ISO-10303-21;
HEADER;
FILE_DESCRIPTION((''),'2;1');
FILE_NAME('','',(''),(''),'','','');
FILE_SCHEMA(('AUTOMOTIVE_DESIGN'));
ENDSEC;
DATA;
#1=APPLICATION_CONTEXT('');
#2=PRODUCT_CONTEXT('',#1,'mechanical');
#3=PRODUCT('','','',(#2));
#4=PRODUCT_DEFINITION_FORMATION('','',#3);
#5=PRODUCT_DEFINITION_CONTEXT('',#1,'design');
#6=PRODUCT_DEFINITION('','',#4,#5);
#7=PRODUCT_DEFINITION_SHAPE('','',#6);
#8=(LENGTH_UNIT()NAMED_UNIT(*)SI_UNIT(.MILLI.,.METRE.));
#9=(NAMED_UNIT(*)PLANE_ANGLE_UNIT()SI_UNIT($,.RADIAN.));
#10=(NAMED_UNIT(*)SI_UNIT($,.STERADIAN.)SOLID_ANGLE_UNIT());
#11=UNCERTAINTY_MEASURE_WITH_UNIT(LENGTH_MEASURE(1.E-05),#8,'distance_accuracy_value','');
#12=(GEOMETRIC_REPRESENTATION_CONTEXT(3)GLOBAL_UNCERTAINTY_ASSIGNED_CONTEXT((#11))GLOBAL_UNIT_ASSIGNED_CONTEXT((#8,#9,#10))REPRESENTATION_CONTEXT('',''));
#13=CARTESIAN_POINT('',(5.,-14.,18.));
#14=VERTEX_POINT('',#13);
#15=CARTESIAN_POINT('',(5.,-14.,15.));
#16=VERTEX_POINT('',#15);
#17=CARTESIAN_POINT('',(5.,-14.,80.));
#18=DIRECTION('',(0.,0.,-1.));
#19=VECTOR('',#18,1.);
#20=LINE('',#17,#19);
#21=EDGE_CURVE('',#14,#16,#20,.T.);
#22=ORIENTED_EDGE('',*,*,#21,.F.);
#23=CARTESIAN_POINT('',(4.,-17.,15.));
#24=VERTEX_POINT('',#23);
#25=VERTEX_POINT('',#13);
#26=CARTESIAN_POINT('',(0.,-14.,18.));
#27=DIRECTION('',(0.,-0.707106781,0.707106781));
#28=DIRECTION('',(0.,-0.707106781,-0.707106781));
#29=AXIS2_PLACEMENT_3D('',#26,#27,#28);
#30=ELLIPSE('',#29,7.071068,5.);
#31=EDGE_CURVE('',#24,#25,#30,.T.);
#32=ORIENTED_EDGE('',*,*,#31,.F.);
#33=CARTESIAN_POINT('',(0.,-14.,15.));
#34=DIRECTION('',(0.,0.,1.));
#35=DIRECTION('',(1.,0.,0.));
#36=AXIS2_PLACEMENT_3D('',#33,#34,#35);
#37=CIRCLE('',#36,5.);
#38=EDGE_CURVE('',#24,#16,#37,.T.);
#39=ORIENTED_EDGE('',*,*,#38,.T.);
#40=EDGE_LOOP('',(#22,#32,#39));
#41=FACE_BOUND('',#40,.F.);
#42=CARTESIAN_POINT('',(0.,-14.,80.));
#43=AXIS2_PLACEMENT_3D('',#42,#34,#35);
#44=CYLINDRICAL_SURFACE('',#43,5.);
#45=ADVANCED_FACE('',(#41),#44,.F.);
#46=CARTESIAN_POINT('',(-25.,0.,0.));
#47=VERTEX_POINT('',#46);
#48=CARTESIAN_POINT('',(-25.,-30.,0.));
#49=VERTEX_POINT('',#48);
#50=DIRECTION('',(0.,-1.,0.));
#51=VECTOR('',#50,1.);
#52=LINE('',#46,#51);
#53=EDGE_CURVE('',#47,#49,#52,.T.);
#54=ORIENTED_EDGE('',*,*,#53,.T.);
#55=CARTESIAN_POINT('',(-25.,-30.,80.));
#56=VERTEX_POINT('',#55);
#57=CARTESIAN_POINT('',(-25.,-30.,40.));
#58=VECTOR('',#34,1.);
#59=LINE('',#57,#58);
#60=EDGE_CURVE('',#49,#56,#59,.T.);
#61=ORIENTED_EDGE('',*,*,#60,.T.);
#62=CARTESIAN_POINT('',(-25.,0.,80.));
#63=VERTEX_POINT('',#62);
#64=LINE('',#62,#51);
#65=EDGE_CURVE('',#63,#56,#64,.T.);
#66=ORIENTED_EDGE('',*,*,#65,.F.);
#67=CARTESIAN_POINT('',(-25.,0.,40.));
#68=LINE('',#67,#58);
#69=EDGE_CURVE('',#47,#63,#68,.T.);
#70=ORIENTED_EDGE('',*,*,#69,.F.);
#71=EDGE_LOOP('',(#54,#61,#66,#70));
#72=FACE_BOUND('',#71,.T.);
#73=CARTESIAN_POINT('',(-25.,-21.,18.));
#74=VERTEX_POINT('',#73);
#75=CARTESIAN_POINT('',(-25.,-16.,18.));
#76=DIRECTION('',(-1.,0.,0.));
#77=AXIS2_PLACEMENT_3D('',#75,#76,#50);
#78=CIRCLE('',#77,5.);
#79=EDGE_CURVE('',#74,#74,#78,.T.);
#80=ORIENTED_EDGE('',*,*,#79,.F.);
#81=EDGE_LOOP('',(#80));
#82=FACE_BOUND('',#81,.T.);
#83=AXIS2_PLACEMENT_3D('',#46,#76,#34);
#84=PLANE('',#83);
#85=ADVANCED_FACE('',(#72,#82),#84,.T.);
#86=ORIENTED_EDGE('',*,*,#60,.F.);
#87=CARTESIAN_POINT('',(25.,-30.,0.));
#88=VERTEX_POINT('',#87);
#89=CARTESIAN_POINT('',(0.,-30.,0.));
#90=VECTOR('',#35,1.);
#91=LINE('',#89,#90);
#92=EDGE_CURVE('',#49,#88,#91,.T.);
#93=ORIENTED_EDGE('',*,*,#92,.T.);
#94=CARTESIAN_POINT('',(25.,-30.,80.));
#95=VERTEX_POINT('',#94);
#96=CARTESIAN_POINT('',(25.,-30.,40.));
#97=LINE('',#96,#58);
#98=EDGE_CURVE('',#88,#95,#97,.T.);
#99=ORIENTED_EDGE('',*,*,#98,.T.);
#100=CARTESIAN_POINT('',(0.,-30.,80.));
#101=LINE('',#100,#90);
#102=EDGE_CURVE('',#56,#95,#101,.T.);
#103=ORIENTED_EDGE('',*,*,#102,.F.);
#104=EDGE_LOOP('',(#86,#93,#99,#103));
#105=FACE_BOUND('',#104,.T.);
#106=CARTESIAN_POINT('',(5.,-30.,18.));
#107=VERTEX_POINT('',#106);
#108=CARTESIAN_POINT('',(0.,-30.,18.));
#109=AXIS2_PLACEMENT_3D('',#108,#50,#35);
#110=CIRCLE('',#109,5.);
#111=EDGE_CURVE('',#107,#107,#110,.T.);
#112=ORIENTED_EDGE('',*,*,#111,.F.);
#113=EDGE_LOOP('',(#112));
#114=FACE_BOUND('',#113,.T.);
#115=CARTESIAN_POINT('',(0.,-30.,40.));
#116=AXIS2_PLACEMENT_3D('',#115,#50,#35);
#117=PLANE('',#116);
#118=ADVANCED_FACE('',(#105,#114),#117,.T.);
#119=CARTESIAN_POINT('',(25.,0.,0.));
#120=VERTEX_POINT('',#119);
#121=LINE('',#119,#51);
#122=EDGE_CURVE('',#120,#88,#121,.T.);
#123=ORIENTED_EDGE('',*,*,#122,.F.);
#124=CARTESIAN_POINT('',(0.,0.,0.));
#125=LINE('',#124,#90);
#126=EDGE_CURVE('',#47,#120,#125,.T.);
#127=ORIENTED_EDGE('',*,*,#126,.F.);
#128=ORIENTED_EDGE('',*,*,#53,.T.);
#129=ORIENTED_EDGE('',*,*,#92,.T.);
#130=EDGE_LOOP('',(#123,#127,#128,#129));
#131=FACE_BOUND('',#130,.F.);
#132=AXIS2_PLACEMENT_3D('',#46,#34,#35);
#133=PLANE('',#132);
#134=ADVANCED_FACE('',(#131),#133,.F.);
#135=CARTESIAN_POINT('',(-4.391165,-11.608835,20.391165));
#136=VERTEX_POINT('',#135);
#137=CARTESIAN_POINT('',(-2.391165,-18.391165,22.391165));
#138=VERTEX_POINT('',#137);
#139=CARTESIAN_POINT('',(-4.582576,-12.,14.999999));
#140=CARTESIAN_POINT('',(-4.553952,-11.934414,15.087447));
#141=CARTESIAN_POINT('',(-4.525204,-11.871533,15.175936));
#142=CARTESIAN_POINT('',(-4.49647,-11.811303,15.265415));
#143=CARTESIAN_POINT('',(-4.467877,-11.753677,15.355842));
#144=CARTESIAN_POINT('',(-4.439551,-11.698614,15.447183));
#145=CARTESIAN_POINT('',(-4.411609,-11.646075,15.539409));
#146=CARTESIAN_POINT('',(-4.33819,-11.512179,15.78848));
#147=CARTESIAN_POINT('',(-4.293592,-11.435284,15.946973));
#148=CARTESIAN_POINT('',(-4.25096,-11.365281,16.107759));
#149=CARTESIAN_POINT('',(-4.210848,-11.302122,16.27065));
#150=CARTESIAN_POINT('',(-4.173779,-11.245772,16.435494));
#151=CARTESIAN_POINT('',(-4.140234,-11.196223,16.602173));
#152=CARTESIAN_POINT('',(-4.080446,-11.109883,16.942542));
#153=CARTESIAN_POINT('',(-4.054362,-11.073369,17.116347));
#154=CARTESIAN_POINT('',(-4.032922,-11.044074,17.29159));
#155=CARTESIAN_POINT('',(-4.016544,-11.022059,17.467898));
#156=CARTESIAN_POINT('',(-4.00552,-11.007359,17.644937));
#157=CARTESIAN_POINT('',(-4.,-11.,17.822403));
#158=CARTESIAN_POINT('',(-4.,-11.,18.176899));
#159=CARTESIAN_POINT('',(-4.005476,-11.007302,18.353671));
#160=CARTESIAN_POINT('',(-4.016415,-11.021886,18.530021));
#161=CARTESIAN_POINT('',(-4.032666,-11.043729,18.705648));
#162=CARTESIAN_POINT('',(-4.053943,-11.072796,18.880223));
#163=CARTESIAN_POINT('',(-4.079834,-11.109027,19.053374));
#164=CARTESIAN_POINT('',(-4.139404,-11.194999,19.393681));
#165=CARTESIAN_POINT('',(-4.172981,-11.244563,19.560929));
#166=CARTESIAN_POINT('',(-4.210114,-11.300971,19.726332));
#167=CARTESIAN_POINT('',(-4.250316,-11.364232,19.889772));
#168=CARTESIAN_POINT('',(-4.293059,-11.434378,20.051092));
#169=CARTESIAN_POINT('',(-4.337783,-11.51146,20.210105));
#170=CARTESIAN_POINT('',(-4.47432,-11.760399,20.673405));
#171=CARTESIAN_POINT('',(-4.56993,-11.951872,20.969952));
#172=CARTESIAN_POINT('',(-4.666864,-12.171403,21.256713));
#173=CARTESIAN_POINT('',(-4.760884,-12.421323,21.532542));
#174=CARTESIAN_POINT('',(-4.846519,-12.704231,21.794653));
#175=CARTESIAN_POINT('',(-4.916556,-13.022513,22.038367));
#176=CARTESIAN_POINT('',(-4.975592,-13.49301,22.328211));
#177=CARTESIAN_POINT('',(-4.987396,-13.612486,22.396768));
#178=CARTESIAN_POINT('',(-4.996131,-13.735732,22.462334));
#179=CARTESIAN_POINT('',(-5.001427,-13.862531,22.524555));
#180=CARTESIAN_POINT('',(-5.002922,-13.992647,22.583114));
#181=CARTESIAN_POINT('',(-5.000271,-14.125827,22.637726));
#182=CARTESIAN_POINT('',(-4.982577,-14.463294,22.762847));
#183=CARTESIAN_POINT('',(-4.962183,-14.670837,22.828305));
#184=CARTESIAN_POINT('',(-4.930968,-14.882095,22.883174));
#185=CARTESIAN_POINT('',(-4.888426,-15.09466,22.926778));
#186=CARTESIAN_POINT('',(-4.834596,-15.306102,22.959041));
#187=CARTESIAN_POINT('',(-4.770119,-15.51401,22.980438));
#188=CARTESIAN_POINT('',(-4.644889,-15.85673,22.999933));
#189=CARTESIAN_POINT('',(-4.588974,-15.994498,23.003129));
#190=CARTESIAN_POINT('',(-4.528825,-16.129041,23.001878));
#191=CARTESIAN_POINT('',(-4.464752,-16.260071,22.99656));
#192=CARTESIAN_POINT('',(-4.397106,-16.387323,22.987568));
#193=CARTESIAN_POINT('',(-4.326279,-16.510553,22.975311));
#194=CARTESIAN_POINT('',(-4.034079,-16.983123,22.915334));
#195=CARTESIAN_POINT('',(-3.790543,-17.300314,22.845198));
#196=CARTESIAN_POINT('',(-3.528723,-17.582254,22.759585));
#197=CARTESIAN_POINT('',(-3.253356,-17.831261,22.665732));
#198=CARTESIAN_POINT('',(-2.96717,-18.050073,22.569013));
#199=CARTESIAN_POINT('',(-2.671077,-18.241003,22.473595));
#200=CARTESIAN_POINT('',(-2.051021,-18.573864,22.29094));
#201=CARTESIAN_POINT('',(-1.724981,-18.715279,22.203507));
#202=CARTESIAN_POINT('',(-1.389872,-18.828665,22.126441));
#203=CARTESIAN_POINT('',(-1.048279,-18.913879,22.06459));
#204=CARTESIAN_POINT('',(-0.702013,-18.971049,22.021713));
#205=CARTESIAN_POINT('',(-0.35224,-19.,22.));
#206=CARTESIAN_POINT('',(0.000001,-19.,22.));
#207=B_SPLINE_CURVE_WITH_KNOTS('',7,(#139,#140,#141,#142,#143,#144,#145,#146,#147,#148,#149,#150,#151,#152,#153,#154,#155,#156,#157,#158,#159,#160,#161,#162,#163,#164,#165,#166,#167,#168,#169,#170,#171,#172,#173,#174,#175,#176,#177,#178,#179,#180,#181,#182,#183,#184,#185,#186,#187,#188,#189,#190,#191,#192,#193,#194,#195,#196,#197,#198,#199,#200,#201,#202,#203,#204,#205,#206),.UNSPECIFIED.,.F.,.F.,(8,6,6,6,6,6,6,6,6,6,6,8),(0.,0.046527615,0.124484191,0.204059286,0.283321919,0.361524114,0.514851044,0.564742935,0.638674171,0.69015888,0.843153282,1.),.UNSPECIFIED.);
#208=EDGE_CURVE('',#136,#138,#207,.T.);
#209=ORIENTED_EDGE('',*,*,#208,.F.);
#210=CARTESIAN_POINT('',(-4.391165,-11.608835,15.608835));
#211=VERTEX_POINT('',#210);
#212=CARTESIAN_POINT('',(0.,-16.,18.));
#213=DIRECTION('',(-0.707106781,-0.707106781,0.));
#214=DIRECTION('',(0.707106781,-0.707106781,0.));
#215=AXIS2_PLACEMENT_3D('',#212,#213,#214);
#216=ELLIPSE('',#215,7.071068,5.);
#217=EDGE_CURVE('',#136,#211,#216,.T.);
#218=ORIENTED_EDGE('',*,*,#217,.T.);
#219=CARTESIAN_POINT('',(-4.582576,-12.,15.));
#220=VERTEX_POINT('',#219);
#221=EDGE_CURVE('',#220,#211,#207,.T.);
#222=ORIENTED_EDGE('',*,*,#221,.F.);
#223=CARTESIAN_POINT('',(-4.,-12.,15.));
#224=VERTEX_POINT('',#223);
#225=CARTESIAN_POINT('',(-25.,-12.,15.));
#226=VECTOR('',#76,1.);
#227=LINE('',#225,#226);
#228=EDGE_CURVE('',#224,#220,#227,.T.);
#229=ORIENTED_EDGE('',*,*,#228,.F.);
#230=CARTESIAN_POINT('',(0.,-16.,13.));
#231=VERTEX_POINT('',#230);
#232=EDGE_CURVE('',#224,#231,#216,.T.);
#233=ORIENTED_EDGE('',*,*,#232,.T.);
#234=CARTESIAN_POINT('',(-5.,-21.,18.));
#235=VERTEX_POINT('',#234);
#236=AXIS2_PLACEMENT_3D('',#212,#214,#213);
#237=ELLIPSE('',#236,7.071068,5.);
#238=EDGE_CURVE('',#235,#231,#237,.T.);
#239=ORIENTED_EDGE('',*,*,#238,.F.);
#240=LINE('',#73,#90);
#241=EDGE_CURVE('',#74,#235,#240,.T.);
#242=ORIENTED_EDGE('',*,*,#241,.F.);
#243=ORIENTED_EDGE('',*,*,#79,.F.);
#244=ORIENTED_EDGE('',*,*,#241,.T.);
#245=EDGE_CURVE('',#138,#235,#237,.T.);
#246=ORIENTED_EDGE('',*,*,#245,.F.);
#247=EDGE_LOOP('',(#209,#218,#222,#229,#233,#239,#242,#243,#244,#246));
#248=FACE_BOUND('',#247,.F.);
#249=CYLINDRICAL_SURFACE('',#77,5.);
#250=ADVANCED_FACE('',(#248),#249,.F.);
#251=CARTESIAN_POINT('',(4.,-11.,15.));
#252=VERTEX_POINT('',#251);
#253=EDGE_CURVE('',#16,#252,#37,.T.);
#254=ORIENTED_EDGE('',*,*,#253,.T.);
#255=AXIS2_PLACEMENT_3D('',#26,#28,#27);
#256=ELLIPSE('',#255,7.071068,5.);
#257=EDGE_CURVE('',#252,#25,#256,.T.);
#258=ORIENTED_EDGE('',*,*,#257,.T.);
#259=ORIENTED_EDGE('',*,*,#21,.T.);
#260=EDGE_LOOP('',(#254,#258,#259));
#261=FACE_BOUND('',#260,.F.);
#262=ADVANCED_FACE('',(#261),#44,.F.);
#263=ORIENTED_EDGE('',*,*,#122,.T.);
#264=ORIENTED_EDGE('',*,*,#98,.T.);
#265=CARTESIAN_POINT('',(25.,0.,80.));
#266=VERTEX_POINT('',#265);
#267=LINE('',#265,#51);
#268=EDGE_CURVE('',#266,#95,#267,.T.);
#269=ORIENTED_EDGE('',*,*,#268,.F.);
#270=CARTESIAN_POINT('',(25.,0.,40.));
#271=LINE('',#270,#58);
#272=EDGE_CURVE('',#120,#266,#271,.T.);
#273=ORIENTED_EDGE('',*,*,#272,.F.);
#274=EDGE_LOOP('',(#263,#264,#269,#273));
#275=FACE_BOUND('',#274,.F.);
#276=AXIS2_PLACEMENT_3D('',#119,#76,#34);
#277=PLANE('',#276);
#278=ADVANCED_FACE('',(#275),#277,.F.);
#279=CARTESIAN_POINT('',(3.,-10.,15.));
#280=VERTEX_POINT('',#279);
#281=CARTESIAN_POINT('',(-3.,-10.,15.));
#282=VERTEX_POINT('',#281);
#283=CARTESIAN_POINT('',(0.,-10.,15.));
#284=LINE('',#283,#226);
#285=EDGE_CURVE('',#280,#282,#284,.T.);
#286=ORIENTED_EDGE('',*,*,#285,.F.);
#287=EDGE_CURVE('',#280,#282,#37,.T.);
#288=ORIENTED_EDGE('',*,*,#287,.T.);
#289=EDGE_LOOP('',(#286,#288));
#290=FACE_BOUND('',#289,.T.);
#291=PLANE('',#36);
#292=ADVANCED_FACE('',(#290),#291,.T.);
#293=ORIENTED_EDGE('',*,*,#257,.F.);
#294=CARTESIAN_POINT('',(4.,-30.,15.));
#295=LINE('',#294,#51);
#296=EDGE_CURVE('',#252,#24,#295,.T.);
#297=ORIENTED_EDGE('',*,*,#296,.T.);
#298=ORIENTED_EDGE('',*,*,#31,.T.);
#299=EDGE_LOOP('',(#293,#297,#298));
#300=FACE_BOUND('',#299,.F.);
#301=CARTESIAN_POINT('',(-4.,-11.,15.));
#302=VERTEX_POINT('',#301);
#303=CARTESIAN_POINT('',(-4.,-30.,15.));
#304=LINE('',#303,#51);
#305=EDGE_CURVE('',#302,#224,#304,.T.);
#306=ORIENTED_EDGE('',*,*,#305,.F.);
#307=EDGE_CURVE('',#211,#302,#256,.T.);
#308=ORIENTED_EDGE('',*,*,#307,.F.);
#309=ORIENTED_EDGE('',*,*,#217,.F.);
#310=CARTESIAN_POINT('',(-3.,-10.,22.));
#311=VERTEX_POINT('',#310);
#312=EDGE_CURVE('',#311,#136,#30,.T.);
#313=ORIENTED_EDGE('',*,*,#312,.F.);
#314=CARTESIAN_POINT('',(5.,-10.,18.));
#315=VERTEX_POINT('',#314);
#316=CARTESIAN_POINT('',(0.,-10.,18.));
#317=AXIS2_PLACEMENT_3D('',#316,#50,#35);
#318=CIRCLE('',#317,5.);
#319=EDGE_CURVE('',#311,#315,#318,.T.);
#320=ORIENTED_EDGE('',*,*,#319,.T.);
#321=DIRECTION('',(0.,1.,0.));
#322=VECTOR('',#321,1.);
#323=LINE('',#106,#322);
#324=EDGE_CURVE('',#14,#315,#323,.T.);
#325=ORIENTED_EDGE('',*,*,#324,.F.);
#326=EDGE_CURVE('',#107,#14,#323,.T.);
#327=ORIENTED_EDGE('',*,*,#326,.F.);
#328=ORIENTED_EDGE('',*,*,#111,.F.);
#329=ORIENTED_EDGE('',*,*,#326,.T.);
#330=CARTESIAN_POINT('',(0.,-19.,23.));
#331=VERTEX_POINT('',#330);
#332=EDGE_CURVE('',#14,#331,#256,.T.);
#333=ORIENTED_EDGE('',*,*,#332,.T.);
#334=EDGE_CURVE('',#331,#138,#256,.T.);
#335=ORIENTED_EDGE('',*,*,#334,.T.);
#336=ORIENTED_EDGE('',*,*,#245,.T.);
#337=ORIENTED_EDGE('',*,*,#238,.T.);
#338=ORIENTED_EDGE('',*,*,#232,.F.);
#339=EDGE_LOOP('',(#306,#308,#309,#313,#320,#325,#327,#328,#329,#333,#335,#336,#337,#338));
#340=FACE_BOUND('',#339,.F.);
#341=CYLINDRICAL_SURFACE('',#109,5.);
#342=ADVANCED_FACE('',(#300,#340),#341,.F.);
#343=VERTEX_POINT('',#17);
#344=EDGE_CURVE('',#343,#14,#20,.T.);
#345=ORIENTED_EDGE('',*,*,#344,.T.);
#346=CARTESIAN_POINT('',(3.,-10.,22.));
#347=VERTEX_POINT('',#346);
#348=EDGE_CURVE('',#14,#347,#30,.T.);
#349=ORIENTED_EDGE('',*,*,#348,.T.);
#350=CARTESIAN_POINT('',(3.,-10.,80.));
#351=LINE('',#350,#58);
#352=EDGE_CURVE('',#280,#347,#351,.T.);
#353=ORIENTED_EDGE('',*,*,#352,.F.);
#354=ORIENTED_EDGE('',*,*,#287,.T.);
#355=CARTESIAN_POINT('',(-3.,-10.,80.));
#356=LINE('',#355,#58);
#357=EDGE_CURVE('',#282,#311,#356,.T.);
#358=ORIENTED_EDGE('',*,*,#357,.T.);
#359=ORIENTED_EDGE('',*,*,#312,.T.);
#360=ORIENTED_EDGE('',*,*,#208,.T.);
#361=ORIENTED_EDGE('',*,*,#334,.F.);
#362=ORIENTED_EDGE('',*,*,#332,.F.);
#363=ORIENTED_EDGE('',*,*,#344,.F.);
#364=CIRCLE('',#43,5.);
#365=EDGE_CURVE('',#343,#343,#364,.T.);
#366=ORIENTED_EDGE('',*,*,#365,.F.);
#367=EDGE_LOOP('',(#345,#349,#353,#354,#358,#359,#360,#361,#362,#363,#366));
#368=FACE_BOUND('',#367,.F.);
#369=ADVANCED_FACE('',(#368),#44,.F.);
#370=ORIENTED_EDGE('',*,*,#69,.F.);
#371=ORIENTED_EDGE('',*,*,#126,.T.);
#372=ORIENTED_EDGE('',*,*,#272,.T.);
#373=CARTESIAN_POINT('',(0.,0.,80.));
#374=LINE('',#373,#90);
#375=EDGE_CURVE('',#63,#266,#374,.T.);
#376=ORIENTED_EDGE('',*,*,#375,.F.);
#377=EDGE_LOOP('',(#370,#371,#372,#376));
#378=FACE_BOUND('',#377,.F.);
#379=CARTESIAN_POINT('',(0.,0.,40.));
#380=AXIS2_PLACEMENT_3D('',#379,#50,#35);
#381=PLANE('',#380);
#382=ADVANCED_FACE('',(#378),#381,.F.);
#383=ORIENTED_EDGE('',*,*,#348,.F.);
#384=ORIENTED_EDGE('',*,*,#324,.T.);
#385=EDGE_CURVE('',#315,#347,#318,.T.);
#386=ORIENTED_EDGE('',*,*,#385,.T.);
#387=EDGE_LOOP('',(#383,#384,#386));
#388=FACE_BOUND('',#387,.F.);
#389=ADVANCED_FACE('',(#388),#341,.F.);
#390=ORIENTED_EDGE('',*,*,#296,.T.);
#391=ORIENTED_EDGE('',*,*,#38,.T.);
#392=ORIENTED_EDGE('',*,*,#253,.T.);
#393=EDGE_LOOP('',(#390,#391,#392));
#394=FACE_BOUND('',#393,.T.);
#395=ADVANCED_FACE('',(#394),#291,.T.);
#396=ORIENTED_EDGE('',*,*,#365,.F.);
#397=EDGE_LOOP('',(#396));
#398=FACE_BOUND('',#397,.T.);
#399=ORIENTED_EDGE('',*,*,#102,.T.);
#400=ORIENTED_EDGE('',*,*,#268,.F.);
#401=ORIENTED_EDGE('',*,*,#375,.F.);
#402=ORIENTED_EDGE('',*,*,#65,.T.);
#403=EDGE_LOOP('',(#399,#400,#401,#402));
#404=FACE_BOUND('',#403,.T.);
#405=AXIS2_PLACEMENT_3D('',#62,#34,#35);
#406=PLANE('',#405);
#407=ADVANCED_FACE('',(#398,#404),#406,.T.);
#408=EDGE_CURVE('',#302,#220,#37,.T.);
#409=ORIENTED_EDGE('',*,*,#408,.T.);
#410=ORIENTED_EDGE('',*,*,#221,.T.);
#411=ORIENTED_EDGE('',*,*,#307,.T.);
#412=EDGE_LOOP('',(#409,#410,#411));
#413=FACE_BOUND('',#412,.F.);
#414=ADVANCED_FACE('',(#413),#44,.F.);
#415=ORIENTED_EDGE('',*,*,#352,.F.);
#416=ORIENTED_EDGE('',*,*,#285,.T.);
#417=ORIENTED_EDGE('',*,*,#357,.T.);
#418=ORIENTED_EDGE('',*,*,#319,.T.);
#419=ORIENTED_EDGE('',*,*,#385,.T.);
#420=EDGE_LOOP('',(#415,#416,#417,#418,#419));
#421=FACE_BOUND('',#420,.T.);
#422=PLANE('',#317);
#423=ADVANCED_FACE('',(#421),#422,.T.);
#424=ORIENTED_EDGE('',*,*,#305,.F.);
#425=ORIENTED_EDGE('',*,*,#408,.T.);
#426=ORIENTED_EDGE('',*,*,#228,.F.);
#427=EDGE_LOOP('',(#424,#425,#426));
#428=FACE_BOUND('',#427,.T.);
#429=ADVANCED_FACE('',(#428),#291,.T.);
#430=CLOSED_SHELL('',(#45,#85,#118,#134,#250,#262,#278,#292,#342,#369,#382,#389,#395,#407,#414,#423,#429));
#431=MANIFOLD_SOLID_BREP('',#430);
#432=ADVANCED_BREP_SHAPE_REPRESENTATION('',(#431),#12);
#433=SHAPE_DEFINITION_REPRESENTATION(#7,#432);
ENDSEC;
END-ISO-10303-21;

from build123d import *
from build123d import SkipClean  # not in build123d's __all__

# Parameters (mm, degrees)
F0_W     = 50
F0_H     = 80
F1_DEPTH = 30
F2_R     = 5
F3_DEPTH = 20
F4_R     = 5
F5_DEPTH = 25
F6_R     = 5
F7_DEPTH = 65


with BuildPart() as f1:
    # F0 (on Front) → F1 (new body)
    with BuildSketch(Plane.XZ):
        with Locations((0, 40)):
            Rectangle(F0_W, F0_H)
    extrude(amount=F1_DEPTH)

    # F2 (on face) → F3 (cut)
    with BuildSketch(Plane.XZ.offset(30)):
        with Locations((0, 18)):
            Circle(F2_R)
    extrude(amount=-F3_DEPTH, mode=Mode.SUBTRACT)

    # F4 (on face) → F5 (cut)
    with BuildSketch(Plane(origin=(-25, 0, 0), x_dir=(0, -1, 0), z_dir=(-1, 0, 0))):
        with Locations((16, 18)):
            Circle(F4_R)
    extrude(amount=-F5_DEPTH, mode=Mode.SUBTRACT)

    # F6 (on face) → F7 (cut)
    with BuildSketch(Plane.XY.offset(80)):
        with Locations((0, -14)):
            Circle(F6_R)
    with SkipClean():  # cleaning this boolean's faces spoils the solid; the shape is the same uncleaned
        extrude(amount=-F7_DEPTH, mode=Mode.SUBTRACT)


solid = f1.part
